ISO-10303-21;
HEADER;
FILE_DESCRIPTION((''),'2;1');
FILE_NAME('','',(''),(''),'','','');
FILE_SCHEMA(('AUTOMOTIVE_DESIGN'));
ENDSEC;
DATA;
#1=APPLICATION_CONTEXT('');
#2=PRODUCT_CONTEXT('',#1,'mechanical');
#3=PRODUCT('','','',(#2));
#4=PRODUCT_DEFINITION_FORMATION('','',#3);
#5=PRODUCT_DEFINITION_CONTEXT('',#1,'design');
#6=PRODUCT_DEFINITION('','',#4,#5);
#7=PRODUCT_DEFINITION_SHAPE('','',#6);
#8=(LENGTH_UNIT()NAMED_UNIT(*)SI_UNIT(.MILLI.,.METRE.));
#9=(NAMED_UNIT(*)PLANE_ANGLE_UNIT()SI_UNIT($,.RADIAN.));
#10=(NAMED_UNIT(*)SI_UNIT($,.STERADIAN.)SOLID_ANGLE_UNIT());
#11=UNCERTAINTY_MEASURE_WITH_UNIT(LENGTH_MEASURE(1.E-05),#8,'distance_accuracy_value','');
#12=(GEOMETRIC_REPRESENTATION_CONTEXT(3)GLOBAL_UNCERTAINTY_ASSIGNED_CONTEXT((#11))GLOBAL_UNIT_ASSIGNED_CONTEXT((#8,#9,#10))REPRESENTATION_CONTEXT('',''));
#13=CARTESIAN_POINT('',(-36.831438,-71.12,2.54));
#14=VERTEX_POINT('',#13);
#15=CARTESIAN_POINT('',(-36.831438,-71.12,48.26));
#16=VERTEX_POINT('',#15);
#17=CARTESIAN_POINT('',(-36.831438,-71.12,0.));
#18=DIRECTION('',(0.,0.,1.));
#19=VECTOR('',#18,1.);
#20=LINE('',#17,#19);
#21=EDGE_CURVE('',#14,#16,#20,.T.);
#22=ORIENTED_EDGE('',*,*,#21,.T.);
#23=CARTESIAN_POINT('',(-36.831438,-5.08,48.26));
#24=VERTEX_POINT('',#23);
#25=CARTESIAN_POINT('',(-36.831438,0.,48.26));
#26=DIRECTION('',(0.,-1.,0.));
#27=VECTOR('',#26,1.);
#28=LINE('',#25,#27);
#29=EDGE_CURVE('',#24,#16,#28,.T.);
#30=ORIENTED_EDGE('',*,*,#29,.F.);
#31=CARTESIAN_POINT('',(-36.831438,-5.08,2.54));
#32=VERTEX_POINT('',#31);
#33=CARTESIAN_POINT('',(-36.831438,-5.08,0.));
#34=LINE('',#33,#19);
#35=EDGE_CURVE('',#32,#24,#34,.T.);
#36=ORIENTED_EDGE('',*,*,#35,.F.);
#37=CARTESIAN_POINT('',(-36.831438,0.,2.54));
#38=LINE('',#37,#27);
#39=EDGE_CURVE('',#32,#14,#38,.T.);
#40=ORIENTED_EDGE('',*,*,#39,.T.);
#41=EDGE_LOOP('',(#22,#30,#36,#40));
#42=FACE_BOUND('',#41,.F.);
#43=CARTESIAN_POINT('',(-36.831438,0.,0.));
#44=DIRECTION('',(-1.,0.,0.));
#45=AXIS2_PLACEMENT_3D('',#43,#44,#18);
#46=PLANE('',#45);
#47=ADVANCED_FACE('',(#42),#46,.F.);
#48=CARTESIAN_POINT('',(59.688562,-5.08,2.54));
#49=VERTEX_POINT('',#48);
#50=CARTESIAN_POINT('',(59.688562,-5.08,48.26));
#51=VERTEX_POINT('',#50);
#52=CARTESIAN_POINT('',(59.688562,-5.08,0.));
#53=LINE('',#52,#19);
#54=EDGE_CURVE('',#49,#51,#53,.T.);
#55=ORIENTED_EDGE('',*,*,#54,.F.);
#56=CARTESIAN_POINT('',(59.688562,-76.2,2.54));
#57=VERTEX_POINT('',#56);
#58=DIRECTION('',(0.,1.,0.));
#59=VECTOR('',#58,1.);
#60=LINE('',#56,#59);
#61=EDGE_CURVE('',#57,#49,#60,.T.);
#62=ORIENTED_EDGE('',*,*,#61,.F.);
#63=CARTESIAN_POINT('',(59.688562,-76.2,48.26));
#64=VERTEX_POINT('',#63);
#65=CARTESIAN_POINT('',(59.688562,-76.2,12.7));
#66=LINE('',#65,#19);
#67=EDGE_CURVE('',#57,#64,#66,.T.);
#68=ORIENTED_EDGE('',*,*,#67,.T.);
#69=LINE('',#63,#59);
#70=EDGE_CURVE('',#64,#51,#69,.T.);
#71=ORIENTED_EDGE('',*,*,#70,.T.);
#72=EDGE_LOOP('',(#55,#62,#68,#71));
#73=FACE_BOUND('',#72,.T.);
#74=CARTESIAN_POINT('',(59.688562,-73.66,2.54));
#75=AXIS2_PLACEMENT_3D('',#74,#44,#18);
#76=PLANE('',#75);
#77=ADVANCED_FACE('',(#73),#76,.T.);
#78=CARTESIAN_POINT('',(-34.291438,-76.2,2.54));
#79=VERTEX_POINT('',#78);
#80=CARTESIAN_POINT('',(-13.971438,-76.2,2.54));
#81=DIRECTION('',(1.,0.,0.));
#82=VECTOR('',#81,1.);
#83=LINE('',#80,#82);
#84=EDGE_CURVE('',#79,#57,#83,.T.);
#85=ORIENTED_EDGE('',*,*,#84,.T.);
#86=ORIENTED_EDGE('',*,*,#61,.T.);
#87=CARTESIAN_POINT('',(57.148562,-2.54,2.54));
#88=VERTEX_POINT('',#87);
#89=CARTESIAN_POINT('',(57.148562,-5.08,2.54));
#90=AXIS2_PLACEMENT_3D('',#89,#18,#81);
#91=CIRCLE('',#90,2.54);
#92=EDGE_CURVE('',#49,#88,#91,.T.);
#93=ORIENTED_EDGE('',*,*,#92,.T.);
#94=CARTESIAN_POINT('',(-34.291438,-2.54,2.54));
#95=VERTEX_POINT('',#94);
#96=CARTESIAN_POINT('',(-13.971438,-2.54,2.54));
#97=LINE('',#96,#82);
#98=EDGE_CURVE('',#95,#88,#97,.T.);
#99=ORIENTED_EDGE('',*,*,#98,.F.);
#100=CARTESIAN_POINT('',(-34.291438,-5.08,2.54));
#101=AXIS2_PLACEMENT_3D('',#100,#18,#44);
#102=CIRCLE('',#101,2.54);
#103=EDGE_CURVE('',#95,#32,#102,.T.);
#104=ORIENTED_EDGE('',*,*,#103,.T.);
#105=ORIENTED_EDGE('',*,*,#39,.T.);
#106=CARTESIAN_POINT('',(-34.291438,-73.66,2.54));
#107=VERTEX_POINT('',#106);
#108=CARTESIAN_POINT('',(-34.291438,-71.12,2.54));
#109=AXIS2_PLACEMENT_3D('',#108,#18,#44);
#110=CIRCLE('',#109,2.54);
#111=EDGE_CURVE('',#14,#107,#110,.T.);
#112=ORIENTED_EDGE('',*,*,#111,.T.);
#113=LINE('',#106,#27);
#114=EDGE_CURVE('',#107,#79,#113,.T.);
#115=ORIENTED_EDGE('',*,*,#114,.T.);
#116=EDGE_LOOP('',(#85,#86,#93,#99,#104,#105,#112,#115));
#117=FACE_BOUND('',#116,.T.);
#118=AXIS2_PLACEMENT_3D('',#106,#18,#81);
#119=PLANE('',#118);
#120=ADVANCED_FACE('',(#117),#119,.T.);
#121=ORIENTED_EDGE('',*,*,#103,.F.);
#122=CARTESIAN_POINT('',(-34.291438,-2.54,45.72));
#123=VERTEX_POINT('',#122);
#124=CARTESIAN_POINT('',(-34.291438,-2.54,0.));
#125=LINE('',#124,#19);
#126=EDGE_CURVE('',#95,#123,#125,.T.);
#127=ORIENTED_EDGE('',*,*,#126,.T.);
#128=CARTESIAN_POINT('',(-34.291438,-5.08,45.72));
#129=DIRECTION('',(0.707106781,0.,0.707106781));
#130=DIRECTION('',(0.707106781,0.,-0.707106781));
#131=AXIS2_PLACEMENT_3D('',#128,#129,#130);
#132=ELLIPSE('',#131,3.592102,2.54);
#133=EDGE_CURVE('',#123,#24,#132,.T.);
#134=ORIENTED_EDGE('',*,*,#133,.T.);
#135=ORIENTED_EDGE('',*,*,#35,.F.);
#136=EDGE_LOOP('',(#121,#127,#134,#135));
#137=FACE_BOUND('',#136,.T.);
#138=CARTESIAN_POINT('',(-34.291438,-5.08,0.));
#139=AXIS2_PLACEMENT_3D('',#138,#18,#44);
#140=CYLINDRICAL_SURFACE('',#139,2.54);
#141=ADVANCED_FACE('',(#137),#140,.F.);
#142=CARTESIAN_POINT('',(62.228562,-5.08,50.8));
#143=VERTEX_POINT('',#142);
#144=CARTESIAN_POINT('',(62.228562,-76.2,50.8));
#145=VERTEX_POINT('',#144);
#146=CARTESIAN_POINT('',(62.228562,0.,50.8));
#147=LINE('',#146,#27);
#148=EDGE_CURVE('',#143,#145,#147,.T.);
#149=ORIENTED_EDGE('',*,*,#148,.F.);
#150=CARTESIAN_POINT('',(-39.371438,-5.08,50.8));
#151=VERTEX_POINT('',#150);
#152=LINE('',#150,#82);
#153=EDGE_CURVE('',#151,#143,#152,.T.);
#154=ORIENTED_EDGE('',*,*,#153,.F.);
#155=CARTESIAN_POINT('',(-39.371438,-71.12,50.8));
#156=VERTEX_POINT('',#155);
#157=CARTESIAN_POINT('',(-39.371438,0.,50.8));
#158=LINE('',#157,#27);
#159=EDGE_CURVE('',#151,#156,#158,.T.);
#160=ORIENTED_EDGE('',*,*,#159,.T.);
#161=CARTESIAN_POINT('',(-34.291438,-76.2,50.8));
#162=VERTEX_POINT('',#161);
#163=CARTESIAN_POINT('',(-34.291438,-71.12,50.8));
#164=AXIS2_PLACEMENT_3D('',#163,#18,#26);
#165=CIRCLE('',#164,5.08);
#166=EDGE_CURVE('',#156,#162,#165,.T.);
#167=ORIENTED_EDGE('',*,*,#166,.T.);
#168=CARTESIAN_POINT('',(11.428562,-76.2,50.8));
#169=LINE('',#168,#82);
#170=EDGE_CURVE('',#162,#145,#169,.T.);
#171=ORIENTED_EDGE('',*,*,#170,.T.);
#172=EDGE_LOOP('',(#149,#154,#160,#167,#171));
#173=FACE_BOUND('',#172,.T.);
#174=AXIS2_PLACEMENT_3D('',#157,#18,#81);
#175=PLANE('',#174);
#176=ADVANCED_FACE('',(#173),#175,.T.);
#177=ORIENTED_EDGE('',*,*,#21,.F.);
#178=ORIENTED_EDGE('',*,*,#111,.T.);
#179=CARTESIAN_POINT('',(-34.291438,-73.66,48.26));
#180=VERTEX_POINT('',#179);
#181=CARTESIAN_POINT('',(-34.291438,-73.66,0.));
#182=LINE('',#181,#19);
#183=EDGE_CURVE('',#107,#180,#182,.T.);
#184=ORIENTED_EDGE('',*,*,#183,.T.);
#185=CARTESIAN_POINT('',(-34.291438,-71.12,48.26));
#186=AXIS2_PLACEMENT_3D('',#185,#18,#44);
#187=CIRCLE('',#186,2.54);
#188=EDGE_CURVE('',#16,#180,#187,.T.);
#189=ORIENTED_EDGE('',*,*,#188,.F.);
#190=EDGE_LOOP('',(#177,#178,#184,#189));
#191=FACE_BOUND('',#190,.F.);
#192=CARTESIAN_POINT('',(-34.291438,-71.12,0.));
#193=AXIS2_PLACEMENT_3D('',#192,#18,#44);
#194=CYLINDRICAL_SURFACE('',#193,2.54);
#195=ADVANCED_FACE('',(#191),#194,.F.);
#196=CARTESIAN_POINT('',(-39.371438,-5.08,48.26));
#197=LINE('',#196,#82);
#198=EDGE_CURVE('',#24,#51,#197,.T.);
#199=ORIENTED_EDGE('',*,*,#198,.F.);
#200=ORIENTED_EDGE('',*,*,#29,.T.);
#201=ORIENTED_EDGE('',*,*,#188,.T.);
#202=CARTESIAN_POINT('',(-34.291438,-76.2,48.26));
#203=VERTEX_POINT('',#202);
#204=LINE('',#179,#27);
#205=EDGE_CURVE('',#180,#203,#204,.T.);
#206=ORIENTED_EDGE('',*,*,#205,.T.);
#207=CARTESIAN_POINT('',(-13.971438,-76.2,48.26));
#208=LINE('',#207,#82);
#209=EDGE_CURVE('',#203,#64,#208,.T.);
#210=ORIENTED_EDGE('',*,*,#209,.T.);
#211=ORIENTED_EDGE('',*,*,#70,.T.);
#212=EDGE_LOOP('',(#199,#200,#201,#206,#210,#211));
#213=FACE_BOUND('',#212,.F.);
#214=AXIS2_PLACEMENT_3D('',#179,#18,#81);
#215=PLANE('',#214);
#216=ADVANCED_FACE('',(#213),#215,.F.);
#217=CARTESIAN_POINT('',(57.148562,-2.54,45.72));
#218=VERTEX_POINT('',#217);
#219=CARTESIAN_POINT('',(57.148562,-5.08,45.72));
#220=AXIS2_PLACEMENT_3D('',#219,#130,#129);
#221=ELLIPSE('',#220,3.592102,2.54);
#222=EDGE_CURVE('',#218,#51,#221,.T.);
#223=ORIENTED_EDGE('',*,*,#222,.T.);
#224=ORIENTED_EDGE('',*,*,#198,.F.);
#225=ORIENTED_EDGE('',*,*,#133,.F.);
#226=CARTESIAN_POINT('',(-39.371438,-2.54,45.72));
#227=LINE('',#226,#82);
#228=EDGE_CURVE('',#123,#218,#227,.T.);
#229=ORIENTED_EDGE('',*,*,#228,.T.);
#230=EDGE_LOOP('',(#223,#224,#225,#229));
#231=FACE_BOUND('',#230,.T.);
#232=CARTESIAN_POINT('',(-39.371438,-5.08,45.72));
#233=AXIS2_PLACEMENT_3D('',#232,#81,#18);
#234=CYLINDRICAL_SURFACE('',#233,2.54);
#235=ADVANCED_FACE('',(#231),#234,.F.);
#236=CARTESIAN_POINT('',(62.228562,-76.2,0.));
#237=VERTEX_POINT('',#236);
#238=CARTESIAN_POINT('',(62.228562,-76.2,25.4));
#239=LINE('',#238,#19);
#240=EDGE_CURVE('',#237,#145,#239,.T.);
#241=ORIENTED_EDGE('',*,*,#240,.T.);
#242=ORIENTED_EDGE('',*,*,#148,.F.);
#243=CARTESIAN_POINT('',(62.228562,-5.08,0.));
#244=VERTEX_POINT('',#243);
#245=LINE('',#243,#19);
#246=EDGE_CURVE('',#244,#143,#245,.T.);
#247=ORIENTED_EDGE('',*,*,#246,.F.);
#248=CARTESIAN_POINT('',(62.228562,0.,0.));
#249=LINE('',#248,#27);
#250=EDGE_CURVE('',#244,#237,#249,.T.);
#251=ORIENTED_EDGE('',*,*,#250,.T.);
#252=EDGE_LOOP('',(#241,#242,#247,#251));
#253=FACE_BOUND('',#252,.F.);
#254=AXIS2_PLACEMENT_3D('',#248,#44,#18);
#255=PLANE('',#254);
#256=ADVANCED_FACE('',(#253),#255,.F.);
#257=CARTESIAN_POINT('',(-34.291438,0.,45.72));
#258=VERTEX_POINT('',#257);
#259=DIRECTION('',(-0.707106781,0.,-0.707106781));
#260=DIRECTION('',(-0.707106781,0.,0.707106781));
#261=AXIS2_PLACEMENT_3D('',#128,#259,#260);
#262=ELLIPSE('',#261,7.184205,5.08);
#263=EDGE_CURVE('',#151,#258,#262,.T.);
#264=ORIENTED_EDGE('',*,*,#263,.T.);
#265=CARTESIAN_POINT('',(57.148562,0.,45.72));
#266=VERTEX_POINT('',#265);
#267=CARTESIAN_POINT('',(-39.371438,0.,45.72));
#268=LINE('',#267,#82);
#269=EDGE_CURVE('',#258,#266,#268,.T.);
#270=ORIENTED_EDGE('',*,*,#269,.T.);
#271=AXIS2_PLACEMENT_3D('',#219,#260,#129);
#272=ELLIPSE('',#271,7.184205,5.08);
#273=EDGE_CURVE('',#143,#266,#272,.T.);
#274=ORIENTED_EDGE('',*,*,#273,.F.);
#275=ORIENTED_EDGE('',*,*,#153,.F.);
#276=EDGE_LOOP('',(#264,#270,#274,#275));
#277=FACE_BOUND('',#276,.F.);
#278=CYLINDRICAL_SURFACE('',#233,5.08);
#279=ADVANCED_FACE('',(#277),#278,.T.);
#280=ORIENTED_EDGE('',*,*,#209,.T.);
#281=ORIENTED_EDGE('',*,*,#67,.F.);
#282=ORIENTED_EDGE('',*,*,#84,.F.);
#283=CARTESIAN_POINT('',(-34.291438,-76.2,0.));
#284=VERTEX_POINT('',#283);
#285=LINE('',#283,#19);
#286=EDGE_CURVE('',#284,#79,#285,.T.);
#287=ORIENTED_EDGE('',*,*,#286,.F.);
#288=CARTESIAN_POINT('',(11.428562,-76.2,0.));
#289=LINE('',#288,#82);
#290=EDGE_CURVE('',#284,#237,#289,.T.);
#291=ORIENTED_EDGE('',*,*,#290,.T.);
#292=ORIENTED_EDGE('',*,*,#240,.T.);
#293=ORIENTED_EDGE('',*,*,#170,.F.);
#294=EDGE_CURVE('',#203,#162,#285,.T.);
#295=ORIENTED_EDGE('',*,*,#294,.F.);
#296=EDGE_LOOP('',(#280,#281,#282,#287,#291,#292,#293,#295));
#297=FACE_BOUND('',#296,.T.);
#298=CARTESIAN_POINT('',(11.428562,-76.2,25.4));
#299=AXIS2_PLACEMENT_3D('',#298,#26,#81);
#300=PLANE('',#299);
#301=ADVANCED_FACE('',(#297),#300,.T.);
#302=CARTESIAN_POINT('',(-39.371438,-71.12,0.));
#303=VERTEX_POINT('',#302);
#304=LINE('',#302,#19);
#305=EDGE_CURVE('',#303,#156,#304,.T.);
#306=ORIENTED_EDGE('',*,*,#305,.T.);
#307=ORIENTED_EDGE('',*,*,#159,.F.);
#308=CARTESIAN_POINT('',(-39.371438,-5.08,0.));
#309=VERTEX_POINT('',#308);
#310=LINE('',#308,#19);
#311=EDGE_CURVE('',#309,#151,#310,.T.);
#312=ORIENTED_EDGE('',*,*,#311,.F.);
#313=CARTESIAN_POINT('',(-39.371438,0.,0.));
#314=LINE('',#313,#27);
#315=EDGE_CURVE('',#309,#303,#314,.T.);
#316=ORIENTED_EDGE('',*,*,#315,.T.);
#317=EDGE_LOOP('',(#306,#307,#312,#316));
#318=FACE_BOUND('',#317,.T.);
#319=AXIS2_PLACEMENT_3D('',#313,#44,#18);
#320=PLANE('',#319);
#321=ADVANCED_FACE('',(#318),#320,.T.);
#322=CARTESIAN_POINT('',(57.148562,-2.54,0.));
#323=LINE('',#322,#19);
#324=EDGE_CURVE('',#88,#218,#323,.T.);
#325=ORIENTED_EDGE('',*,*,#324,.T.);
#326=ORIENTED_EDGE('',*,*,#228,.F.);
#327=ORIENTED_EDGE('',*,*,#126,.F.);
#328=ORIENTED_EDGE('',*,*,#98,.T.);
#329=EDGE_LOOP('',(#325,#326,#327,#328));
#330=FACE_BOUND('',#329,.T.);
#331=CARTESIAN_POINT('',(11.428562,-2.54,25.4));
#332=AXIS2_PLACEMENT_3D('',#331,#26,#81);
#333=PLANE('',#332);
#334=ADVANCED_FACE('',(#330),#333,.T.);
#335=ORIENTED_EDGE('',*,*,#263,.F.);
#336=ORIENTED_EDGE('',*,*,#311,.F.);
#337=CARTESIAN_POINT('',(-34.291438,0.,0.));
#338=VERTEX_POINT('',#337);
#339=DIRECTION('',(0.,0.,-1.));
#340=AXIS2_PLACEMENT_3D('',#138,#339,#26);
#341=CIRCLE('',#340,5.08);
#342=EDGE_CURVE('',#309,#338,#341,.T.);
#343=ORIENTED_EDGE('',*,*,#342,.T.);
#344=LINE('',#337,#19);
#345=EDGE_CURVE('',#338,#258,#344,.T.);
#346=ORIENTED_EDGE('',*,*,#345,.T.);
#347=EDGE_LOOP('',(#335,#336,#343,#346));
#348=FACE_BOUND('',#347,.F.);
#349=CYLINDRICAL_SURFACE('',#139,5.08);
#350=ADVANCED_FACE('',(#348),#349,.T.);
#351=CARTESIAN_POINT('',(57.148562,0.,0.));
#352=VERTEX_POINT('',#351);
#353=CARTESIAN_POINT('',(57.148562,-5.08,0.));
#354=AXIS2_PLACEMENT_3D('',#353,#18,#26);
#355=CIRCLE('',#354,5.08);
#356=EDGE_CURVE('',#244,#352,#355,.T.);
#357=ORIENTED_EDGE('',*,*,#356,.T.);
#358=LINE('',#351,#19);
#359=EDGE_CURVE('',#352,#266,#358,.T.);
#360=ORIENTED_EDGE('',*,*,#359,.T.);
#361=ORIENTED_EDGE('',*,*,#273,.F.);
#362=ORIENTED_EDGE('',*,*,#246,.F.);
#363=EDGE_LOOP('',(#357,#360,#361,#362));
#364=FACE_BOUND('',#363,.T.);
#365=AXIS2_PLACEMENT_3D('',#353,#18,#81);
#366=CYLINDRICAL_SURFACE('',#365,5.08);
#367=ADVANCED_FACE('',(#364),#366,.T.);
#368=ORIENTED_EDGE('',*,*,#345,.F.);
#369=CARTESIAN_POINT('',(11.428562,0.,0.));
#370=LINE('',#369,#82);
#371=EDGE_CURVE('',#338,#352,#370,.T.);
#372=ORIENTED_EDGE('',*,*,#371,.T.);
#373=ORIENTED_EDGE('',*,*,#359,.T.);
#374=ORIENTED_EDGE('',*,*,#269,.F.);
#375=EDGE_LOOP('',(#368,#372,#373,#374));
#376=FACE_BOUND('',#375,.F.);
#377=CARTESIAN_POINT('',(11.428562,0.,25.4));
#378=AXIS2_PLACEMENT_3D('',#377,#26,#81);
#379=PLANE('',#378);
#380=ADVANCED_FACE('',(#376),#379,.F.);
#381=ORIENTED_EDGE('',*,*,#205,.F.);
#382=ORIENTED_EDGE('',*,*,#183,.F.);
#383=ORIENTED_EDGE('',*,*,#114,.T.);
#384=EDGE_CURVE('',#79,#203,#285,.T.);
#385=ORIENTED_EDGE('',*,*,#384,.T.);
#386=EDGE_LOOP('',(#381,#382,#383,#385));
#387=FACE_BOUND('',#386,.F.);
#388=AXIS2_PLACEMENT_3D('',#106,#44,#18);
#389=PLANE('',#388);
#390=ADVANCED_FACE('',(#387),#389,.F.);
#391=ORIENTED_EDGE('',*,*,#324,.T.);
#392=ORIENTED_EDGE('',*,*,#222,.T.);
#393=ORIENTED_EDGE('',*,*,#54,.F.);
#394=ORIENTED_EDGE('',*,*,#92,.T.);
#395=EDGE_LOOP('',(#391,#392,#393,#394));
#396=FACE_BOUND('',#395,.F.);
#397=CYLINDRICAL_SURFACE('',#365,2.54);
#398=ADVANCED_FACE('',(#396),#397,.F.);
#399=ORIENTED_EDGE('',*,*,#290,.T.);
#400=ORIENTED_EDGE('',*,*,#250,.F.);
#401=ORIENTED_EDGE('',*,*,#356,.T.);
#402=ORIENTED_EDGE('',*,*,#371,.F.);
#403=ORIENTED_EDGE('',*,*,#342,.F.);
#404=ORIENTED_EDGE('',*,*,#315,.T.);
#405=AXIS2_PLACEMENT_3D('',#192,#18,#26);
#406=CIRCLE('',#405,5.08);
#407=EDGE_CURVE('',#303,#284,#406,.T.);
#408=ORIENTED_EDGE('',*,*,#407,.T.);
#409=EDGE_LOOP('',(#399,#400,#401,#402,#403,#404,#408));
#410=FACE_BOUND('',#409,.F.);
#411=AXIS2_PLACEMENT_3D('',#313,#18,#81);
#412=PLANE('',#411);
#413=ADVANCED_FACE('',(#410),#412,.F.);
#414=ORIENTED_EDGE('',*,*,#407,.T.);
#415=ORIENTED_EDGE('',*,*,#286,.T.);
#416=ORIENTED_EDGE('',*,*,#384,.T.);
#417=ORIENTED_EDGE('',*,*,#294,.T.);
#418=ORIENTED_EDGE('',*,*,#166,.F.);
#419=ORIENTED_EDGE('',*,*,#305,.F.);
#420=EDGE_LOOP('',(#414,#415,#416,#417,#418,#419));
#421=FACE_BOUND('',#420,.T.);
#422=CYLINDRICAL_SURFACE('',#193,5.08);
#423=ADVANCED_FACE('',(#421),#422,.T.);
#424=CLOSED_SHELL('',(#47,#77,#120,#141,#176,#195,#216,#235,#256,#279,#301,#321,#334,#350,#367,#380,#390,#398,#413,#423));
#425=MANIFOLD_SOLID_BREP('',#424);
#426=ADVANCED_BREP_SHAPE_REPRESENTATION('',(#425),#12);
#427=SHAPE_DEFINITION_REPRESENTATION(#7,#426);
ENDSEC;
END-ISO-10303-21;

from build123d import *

# Parameters (mm, degrees)
F0_W     = 101.6
F0_H     = 50.8
F1_DEPTH = 76.2
F2_R     = 5.08
F3_T     = -2.54


# Not quite as in the source:
# - a shell that OpenCascade refuses in one call is made with other operations: the cavity is built on its own and cut out


with BuildPart() as f1:
    # F0 (on Front) → F1 (new body)
    with BuildSketch(Plane.XZ):
        with Locations((11.4285616755, 25.4)):
            Rectangle(F0_W, F0_H)
    extrude(amount=F1_DEPTH)

    # F2
    f2_edges = [f1.edges().sort_by_distance(p)[0] for p in [
        (-39.371438, -76.2, 25.4),
        (-39.371438, 0, 25.4),
        (11.428562, 0, 50.8),
        (62.228562, 0, 25.4),
    ]]
    fillet(f2_edges, radius=F2_R)

    # F3: a shell. OpenCascade refuses it in one call, so the cavity is built on its own and cut out:
    # the body offset inwards by the wall thickness, plus a prism from it out through each open face.
    f3_core = offset(f1.part, amount=F3_T, mode=Mode.PRIVATE)
    f3_exits = [f3_core.faces().sort_by_distance(p)[0] for p in [
        (12.698562, -73.66, 25.4),
    ]]
    add(f3_core, mode=Mode.SUBTRACT)
    extrude(f3_exits, amount=-F3_T, mode=Mode.SUBTRACT)


solid = f1.part
